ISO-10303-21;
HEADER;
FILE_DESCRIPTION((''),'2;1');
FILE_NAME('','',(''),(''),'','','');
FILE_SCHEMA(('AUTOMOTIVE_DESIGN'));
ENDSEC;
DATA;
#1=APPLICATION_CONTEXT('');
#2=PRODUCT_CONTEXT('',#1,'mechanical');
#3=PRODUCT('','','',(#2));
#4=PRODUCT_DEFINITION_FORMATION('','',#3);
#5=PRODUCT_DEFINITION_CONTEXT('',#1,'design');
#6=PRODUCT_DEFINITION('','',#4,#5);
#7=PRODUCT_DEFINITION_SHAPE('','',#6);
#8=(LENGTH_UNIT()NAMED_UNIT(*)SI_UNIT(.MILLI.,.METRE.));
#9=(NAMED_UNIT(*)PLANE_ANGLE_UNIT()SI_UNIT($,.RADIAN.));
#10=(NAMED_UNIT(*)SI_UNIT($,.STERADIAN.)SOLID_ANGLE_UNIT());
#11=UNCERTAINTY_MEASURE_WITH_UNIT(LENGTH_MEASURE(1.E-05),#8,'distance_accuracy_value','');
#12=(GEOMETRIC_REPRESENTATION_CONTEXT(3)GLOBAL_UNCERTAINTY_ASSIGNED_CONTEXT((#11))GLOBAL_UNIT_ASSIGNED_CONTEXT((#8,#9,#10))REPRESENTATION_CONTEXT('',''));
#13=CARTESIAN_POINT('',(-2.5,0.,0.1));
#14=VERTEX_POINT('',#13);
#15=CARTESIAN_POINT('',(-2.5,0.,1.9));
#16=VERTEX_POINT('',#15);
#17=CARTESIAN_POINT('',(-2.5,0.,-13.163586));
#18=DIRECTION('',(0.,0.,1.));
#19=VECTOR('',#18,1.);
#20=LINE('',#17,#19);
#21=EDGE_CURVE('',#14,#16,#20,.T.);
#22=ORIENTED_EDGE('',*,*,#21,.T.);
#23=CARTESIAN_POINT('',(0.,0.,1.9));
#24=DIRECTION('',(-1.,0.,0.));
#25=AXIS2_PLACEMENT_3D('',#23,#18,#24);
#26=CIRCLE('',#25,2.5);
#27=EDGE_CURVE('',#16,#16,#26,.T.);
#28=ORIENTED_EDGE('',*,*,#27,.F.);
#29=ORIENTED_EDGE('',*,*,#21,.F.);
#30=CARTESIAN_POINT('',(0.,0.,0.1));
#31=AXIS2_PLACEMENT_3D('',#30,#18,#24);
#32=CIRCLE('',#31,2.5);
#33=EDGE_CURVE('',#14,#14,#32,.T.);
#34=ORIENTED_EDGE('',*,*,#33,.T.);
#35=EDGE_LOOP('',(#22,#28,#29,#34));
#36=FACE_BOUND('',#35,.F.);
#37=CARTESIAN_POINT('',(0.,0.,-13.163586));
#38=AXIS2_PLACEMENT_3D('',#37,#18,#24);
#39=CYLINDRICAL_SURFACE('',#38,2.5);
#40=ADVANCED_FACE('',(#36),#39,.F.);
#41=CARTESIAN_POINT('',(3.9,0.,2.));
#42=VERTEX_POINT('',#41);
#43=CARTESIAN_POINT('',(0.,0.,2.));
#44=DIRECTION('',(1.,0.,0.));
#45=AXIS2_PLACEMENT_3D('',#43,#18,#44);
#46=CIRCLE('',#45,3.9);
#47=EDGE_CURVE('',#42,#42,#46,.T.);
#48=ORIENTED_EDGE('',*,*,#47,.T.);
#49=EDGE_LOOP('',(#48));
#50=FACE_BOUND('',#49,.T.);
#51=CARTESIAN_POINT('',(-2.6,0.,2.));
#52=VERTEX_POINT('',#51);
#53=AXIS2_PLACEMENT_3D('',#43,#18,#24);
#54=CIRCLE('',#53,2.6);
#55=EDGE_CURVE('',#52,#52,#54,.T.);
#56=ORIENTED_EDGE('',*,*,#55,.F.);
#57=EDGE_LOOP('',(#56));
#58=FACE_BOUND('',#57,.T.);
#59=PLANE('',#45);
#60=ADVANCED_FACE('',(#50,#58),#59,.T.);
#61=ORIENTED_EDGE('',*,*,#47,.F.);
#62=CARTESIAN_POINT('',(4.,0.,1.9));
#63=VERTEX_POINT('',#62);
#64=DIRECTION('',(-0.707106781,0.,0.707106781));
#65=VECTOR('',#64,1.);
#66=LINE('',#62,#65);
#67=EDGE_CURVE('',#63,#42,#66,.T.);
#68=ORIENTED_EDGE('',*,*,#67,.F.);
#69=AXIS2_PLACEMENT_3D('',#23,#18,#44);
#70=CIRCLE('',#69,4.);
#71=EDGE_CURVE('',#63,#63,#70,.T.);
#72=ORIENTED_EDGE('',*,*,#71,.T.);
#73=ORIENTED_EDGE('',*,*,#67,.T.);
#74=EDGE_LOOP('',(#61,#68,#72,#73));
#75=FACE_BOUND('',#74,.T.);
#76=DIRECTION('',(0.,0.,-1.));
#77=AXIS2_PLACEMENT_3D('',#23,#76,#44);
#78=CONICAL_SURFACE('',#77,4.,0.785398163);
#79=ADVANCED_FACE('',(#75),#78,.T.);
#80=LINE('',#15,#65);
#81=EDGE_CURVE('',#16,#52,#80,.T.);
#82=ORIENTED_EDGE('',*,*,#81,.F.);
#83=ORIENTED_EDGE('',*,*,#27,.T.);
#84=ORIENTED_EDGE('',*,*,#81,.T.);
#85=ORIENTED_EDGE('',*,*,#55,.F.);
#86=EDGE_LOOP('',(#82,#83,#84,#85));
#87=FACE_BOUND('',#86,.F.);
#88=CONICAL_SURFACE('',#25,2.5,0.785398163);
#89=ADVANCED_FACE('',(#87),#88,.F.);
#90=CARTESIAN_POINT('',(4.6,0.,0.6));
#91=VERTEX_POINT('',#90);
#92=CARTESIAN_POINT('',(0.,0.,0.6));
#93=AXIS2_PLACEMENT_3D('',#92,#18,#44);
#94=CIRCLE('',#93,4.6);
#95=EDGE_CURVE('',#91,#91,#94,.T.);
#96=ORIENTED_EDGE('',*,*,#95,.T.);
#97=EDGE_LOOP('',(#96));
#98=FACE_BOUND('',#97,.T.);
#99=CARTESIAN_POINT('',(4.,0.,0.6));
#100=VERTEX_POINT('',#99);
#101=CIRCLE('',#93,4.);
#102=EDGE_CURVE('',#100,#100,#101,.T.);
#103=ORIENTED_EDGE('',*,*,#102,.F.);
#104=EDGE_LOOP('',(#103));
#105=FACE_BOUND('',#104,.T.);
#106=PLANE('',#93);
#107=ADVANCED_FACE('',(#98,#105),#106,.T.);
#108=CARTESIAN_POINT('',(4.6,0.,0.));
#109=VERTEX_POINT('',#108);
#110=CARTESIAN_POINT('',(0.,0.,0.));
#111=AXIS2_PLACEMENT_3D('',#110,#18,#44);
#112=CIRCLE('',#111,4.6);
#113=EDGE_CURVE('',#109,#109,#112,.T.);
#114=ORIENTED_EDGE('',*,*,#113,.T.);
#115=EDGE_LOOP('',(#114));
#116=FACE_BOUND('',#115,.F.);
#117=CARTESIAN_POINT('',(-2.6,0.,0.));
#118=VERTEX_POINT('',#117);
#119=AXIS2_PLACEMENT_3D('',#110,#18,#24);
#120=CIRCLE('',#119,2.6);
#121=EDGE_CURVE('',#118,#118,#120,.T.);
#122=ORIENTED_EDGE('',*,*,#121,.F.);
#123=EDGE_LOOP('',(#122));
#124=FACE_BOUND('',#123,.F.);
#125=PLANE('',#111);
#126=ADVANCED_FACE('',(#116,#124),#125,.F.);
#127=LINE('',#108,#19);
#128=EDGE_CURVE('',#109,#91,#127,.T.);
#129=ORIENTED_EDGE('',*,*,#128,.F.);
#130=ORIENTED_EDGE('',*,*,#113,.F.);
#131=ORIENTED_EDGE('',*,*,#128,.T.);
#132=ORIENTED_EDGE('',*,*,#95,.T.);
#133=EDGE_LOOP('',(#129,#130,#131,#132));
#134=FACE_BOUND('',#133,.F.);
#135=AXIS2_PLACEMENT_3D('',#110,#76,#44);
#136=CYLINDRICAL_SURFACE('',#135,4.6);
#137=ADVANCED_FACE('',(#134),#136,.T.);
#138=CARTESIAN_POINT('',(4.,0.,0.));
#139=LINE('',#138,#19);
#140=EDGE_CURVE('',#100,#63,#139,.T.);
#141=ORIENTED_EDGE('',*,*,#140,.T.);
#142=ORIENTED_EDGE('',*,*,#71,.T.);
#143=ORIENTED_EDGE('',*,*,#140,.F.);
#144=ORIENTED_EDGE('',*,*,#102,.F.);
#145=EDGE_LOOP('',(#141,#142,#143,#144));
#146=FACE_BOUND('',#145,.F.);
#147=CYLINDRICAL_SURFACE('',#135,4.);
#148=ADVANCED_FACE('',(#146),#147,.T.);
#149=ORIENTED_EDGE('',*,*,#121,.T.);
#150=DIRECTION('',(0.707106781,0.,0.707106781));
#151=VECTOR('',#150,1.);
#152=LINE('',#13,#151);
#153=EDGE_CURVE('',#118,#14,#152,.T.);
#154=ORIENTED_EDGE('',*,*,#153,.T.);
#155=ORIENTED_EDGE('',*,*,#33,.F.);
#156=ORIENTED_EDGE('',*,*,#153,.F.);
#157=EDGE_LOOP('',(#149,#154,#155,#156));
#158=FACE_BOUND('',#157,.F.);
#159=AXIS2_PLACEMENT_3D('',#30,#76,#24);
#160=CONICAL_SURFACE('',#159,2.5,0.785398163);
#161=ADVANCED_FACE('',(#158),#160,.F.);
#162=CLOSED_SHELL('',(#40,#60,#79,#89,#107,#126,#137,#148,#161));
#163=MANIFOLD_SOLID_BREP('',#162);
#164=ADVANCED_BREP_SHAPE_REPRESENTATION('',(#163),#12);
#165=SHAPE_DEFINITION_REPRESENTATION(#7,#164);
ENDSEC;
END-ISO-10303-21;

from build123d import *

# Parameters (mm, degrees)
F0_R     = 4
F1_DEPTH = 2
F0_R_2   = 4.6
F2_DEPTH = 0.6
F3_D     = 5
F4_SIZE  = 0.1


with BuildPart() as f1:
    # F0 (on Top) → F1 (new body)
    with BuildSketch(Plane.XY):
        Circle(F0_R)
    extrude(amount=F1_DEPTH)

    # F0 (on Top) → F2 (join)
    with BuildSketch(Plane.XY):
        Circle(F0_R_2)
        Circle(F0_R, mode=Mode.SUBTRACT)
    extrude(amount=F2_DEPTH)

    # F3 (through all)
    with Locations(Plane(origin=(0, 0, 0), x_dir=(1, 0, 0), z_dir=(0, 0, -1))):
        with Locations((0, 0)):
            Hole(F3_D / 2)

    # F4
    f4_edges = [f1.edges().sort_by_distance(p)[0] for p in [
        (-4, 0, 2),
        (-2.5, 0, 2),
        (-2.5, 0, 0),
    ]]
    chamfer(f4_edges, length=F4_SIZE)


solid = f1.part
